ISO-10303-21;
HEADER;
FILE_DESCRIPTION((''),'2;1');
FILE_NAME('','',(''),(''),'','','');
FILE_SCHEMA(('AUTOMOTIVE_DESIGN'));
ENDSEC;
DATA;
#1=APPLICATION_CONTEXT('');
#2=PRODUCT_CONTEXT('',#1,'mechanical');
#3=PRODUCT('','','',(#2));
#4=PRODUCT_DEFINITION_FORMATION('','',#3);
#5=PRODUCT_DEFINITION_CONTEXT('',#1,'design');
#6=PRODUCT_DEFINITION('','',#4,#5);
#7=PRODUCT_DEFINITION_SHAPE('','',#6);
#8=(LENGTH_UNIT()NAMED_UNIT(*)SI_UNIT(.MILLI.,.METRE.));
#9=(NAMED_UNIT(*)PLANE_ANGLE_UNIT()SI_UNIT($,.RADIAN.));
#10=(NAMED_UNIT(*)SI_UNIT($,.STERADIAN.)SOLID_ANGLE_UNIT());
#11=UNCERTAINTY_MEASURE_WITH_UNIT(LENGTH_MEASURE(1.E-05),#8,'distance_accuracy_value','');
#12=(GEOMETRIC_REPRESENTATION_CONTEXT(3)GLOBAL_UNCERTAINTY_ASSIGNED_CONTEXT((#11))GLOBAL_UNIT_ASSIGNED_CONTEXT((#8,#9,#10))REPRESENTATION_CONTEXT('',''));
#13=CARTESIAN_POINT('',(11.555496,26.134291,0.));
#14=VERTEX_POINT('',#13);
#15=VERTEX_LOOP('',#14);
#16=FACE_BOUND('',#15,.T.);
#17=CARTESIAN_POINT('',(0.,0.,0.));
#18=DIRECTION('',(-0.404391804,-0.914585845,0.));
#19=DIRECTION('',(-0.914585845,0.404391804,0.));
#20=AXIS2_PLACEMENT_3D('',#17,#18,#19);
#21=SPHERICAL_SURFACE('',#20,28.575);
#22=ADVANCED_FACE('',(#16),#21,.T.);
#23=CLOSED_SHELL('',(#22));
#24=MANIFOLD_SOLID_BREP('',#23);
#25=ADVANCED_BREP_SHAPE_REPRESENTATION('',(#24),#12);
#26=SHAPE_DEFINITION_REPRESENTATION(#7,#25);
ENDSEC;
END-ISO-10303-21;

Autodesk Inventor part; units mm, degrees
ref_plane "YZ Plane" through (0, 0, 0) normal (1, 0, 0) x (0, 1, 0)
ref_plane "XZ Plane" through (0, 0, 0) normal (0, 1, 0) x (-1, 0, 0)
ref_plane "XY Plane" through (0, 0, 0) normal (0, 0, 1) x (1, 0, 0)
sketch "Sketch1" plane through (0, 0, 0) normal (0, 0, 1) x (1, 0, 0)
  circle A0 centre (0, 0) radius 28.575
  line L0 (11.5555, 26.1343) -> (-11.5555, -26.1343)
  dimension "d0" = 57.15
revolve "Revolution1" add sketch "Sketch1" angle 360 about axis through (11.5555, 26.1343, 0) along (-0.4043926, -0.9145855, 0) picked at (-9.1508, 9.9623) contours L0 A0
properties part number "Racquetball"
